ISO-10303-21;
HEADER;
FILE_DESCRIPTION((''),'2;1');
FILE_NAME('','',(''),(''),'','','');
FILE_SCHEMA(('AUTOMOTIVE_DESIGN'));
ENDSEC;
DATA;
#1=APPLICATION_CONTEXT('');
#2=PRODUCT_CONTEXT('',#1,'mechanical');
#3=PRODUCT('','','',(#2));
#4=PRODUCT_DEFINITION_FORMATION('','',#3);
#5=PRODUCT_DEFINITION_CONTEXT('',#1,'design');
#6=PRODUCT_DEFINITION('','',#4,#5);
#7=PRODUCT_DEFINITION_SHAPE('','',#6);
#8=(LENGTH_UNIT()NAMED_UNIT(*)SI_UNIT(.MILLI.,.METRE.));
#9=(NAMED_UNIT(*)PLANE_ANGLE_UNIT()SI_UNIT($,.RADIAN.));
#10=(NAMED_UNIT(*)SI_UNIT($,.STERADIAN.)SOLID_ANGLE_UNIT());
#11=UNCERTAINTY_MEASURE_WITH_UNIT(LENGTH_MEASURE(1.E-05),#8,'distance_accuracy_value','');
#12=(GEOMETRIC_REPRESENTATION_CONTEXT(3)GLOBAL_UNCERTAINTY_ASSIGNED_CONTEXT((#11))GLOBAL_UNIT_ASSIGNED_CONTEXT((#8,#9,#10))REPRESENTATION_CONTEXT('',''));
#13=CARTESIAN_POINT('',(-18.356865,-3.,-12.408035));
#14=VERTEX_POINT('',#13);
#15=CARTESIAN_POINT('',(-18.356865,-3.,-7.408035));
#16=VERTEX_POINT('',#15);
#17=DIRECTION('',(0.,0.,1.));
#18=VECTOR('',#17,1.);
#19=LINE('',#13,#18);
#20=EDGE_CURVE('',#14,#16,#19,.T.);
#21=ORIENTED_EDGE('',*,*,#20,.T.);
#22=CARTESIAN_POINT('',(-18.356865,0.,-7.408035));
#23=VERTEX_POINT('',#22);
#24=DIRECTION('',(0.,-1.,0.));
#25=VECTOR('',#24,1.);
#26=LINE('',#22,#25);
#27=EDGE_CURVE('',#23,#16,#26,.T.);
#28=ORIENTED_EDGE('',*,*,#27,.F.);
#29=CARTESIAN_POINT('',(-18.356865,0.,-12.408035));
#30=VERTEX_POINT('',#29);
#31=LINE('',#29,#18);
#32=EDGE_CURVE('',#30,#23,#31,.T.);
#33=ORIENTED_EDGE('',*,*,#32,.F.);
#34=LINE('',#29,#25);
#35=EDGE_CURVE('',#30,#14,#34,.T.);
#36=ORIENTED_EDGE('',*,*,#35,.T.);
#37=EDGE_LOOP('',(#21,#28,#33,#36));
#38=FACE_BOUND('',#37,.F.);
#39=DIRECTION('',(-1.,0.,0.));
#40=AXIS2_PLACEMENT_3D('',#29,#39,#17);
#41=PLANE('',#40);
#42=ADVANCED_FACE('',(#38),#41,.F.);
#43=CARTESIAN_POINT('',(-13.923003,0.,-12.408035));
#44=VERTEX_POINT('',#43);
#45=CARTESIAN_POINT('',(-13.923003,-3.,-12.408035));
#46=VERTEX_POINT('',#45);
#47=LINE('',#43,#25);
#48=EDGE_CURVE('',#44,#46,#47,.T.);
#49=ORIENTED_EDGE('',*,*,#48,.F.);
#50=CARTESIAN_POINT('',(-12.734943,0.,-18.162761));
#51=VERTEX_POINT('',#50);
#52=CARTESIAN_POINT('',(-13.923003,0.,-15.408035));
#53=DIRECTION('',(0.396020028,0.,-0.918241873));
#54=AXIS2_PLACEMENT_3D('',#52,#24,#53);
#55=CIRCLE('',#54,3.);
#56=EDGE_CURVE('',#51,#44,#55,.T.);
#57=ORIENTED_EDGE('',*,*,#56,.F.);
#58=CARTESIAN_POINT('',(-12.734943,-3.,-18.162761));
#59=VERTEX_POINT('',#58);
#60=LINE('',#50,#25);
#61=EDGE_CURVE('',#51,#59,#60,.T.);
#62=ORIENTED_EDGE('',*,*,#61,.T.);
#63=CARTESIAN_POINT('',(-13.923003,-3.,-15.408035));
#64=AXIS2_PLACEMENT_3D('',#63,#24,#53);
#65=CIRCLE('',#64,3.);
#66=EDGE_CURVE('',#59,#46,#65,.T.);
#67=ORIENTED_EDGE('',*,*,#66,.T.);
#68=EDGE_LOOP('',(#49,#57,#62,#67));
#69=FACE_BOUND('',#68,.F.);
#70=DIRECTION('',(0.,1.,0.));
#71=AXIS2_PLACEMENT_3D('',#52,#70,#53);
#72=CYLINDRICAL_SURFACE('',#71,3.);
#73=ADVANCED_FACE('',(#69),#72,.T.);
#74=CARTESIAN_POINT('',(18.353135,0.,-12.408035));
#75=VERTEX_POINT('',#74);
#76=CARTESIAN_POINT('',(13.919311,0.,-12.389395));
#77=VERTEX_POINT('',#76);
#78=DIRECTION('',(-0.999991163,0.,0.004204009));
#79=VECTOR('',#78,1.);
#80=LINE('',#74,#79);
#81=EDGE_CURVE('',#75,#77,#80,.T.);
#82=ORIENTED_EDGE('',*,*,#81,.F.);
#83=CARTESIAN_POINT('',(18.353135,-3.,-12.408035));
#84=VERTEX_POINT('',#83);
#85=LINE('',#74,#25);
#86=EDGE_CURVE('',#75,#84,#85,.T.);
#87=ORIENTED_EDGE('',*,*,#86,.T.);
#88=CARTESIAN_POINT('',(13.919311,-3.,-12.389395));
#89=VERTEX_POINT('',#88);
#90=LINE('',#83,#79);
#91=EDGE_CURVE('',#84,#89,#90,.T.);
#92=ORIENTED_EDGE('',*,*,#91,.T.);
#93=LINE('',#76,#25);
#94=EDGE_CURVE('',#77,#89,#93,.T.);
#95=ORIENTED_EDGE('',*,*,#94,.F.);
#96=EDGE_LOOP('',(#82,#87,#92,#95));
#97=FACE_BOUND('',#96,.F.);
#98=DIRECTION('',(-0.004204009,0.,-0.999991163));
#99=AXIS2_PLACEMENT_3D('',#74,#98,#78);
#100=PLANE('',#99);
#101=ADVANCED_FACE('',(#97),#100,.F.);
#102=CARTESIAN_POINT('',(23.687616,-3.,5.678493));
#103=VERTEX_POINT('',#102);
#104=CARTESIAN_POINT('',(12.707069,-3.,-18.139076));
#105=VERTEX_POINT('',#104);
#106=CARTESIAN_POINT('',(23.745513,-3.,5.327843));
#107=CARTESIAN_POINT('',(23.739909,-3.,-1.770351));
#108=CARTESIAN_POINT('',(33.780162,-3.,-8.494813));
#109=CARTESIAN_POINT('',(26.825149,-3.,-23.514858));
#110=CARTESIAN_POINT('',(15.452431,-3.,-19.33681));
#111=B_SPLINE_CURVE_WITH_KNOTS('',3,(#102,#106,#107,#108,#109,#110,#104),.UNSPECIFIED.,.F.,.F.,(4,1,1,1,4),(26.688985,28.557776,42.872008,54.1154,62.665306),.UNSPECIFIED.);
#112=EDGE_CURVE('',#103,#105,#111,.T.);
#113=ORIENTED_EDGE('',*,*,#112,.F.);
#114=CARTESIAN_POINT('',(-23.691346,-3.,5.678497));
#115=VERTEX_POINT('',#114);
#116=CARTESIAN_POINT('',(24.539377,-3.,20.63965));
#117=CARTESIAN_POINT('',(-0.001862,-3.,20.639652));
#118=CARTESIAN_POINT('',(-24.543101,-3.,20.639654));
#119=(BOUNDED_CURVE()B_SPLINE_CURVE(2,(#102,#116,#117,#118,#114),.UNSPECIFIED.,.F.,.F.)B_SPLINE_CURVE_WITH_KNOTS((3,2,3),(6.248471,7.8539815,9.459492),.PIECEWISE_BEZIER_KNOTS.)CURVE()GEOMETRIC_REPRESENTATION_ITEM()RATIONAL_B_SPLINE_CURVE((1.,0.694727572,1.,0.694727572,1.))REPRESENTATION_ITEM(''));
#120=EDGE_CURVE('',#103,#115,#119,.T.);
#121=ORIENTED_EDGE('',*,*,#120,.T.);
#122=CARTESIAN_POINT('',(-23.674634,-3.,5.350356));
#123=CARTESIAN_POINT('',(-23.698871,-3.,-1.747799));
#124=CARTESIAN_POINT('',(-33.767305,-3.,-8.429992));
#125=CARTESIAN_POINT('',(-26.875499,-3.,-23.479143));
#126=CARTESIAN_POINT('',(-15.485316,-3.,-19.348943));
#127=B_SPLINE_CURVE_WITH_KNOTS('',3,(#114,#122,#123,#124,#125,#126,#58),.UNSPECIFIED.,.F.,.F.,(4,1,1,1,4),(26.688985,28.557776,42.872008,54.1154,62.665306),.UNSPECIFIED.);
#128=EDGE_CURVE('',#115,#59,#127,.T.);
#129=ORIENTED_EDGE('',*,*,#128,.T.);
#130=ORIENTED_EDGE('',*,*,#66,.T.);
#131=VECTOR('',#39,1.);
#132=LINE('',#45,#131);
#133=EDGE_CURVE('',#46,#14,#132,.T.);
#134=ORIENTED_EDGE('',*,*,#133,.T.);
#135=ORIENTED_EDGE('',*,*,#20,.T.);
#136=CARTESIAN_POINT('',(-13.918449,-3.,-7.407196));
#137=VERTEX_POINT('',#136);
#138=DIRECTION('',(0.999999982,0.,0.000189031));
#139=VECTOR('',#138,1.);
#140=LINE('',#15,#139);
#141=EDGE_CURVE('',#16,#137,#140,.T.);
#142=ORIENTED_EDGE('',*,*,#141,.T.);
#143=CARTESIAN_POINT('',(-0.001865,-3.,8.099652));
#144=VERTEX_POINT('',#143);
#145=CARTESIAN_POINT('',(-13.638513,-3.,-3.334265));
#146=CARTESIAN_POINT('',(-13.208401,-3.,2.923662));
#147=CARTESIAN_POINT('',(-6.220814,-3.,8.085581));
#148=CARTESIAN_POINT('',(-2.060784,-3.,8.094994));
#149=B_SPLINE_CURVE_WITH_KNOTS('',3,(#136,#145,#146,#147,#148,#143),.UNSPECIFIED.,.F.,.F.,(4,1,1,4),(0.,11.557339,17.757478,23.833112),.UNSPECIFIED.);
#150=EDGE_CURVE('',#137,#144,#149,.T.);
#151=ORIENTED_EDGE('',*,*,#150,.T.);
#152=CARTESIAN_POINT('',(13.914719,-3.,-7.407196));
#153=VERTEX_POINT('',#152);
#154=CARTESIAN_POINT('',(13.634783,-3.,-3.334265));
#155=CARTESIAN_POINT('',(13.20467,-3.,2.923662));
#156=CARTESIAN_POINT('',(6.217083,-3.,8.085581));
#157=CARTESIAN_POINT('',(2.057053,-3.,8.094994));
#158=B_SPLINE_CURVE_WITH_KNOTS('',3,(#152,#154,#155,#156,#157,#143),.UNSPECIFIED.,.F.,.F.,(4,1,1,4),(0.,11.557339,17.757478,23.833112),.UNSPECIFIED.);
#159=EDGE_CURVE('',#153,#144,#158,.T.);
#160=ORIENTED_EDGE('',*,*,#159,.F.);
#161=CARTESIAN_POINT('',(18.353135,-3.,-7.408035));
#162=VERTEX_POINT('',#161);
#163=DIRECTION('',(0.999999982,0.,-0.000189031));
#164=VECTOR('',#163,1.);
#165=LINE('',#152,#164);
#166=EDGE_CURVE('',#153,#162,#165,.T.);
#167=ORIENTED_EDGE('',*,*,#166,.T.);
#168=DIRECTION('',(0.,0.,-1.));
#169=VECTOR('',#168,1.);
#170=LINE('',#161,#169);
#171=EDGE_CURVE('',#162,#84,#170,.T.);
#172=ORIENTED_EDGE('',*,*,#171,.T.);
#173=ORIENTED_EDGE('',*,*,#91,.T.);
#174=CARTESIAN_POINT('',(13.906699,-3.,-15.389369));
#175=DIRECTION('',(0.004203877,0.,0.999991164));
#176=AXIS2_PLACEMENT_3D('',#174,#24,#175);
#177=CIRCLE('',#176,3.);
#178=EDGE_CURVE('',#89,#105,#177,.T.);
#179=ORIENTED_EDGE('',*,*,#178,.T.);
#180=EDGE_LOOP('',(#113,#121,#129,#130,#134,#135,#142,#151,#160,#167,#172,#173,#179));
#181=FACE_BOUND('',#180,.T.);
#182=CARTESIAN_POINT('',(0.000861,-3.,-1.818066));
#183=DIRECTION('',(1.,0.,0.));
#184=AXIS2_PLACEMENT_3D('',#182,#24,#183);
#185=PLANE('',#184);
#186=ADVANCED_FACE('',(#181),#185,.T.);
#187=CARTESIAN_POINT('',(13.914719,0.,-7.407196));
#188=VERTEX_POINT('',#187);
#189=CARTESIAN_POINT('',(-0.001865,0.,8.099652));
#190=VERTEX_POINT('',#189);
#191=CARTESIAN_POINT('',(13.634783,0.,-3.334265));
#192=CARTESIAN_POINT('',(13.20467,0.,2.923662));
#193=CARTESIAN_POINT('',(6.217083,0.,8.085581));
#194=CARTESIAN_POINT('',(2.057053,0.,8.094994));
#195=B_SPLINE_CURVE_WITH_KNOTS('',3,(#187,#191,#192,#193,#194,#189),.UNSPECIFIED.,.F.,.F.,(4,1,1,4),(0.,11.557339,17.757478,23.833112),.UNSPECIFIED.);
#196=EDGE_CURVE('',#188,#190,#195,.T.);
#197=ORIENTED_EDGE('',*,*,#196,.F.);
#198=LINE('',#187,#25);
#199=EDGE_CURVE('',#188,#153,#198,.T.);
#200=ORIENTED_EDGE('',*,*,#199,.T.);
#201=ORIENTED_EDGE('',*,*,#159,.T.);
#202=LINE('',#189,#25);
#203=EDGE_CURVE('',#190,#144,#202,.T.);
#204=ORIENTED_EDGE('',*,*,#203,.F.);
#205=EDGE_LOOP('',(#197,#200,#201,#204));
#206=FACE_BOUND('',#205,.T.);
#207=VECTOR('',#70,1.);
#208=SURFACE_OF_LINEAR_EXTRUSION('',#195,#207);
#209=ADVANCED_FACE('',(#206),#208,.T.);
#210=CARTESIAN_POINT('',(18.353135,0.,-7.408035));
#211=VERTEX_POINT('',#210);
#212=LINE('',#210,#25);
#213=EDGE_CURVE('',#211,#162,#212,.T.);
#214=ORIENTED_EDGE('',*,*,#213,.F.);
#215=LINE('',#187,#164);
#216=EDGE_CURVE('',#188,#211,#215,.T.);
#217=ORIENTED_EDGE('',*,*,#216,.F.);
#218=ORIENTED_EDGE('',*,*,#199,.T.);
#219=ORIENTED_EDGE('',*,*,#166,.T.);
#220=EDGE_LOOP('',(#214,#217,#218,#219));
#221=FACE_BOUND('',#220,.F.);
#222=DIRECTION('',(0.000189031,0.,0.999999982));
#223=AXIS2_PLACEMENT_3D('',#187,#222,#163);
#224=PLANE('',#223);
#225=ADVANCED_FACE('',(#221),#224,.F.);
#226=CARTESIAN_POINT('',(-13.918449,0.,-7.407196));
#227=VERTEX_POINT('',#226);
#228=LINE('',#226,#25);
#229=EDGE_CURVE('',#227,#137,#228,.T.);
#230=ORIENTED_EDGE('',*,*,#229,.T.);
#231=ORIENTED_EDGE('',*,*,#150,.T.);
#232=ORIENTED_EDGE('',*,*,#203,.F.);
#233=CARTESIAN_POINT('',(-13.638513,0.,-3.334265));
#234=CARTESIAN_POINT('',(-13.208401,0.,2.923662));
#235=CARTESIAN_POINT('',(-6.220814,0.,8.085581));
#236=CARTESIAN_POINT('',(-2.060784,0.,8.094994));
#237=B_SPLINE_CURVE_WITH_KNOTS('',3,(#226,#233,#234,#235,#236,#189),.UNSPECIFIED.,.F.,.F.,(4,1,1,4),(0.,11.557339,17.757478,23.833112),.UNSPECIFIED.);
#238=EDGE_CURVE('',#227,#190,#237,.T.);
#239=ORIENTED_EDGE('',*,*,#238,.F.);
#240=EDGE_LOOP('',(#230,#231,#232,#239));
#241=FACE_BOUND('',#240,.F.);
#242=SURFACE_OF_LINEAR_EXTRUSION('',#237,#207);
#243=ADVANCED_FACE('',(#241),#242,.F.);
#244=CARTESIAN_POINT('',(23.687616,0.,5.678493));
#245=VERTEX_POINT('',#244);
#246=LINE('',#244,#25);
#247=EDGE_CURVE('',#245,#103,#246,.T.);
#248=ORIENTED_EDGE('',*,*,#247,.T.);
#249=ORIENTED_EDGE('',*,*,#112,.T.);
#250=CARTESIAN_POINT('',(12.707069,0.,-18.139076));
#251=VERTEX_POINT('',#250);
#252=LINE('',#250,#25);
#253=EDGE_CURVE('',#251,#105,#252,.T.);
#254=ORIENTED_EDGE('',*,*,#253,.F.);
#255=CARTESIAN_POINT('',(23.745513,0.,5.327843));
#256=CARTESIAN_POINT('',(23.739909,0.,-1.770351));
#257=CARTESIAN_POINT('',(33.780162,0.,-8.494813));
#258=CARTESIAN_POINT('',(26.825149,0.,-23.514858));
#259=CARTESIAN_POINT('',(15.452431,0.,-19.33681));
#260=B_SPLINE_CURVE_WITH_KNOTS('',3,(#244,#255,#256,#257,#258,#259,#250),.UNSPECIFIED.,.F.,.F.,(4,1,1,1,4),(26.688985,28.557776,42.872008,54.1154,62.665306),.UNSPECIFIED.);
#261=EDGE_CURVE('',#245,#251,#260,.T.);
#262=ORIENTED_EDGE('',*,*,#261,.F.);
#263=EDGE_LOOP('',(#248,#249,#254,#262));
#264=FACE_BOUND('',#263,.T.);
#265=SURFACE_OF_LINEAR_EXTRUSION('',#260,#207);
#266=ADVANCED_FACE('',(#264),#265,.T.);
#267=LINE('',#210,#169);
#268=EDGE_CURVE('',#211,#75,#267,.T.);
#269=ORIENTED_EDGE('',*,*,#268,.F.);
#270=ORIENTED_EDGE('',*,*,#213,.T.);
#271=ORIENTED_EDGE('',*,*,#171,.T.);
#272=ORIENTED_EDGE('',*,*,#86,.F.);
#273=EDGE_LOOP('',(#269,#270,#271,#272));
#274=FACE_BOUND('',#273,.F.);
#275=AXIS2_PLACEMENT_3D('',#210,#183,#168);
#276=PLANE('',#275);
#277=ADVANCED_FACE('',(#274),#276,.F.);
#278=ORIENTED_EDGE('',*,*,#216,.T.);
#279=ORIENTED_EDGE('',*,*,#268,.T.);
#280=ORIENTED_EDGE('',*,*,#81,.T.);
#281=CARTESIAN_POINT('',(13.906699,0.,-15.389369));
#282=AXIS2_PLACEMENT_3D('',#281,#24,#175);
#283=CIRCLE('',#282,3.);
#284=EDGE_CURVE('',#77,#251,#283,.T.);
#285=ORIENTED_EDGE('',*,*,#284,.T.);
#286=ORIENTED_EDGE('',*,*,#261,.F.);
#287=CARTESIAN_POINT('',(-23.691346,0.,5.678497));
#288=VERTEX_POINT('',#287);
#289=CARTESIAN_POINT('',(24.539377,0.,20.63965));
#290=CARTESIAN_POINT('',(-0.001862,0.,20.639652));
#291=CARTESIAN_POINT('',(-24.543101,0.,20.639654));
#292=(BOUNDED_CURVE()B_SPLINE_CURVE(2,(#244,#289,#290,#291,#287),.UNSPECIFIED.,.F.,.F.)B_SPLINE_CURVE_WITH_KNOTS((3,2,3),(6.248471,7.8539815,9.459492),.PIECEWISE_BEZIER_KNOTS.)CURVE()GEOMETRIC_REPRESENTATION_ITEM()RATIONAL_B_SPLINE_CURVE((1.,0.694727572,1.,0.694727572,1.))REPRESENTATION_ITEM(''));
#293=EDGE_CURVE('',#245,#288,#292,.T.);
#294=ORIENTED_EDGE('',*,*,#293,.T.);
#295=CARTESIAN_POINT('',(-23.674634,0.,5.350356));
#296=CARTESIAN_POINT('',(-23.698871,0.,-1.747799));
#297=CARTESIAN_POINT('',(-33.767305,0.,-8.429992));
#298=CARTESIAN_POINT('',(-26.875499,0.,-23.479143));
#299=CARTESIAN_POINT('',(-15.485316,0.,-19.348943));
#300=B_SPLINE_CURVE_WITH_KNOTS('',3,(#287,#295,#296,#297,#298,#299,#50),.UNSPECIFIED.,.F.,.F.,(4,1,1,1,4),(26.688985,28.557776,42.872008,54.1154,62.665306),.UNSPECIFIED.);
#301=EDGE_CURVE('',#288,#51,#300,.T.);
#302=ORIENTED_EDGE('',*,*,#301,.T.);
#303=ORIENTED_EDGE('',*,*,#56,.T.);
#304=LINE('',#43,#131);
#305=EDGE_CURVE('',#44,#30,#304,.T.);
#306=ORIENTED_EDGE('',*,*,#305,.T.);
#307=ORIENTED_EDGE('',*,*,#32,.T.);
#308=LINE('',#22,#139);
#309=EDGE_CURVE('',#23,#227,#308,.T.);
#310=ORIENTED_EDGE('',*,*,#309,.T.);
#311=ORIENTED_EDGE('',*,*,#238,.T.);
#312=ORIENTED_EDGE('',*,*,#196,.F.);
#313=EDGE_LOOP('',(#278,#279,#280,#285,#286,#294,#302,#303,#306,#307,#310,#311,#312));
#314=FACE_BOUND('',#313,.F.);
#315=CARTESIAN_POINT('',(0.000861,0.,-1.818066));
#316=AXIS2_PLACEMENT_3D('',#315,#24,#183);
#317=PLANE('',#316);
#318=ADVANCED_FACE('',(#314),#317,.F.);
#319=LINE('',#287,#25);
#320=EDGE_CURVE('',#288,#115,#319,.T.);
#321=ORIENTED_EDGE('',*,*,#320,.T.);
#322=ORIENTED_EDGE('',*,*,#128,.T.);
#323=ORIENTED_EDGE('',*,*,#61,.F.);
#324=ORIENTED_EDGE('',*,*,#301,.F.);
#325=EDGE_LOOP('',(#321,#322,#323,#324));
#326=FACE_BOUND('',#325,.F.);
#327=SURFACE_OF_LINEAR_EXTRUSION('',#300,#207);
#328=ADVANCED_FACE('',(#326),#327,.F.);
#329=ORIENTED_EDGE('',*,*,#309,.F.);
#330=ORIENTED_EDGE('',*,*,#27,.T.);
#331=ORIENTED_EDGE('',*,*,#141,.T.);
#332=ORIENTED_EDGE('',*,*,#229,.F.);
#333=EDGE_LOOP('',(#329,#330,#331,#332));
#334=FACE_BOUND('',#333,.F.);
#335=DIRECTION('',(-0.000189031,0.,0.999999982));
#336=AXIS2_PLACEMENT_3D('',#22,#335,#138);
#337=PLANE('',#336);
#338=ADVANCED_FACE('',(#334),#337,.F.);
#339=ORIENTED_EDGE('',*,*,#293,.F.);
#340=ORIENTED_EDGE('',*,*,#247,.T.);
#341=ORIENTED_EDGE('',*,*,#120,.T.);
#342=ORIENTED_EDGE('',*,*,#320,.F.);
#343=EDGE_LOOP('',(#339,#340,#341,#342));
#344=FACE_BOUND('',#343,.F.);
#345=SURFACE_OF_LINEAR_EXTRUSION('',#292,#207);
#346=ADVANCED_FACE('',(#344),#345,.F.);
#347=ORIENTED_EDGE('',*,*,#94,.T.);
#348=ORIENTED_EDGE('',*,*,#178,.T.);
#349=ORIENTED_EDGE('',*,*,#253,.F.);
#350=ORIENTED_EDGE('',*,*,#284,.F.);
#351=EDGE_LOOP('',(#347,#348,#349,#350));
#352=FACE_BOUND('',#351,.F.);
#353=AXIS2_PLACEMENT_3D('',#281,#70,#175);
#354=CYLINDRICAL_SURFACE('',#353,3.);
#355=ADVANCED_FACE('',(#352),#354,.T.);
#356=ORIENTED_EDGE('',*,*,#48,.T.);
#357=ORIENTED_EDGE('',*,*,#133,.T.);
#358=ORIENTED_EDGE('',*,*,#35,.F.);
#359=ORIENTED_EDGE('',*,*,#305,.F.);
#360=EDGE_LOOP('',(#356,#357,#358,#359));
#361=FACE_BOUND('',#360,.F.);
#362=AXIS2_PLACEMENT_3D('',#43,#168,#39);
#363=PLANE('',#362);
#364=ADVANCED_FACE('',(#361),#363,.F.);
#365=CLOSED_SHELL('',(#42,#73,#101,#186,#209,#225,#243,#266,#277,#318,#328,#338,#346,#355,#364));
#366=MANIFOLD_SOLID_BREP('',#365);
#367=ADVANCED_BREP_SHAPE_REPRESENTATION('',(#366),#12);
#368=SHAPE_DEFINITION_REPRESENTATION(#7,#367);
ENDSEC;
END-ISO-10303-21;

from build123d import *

# Parameters (mm, degrees)
F1_DEPTH = 3


# Not quite as in the source:
# - ends of sketch curves that miss each other by under 0.0002 mm in the source are joined
# - the dataset's text gives a spline's control points without its knots; the knots are read off the source's solid


with BuildPart() as f1:
    # F0 (on Front) → F1 (new body)
    with BuildSketch(Plane.XZ):
        with BuildLine():
            Line((-13.923003, -12.408035), (-18.356865, -12.408035))
            Line((-18.356865, -12.408035), (-18.356865, -7.408035))
            Line((-18.356865, -7.408035), (-13.918449, -7.407196))
            add(Edge.make_bspline(
                [(-13.918449, -7.407196), (-13.638513, -3.334265), (-13.208401, 2.923662), (-6.220814, 8.085581), (-2.060784, 8.094994), (-0.001865, 8.099652)],
                knots=[0, 0, 0, 0, 11.557339, 17.757478, 23.833112, 23.833112, 23.833112, 23.833112], degree=3))
            add(Edge.make_bspline(
                [(13.914719, -7.407196), (13.634783, -3.334265), (13.20467, 2.923662), (6.217083, 8.085581), (2.057053, 8.094994), (-0.001865, 8.099652)],
                knots=[0, 0, 0, 0, 11.557339, 17.757478, 23.833112, 23.833112, 23.833112, 23.833112], degree=3))
            Line((13.914719, -7.407196), (18.353135, -7.408035))
            Line((18.353135, -7.408035), (18.353135, -12.408035))
            Line((18.353135, -12.408035), (13.919311, -12.389395))
            ThreePointArc((13.919311, -12.389395), (10.9712332753, -14.7704659552), (12.7070690482, -18.1390758896))
            add(Edge.make_bspline(
                [(23.687616, 5.678493), (23.745513, 5.327843), (23.739909, -1.770351), (33.780162, -8.494813), (26.825149, -23.514858), (15.452431, -19.33681), (12.7070690482, -18.1390758896)],
                knots=[26.688985, 26.688985, 26.688985, 26.688985, 28.557776, 42.872008, 54.1154, 62.665306, 62.665306, 62.665306, 62.665306], degree=3))
            add(Edge.make_bspline(
                [(23.687616, 5.678493), (24.5393769355, 20.6396499944), (-0.0018618243, 20.639652), (-24.5431005841, 20.6396540056), (-23.6913461529, 5.6784965777)],
                knots=[6.248471, 6.248471, 6.248471, 7.8539815, 7.8539815, 9.459492, 9.459492, 9.459492], degree=2, weights=[1, 0.694727572, 1, 0.694727572, 1]))
            add(Edge.make_bspline(
                [(-23.6913461529, 5.6784965777), (-23.674634, 5.350356), (-23.698871, -1.747799), (-33.767305, -8.429992), (-26.875499, -23.479143), (-15.485316, -19.348943), (-12.734943, -18.162761)],
                knots=[26.688985, 26.688985, 26.688985, 26.688985, 28.557776, 42.872008, 54.1154, 62.665306, 62.665306, 62.665306, 62.665306], degree=3))
            ThreePointArc((-12.734943, -18.162761), (-10.9849613794, -14.8014779657), (-13.923003, -12.408035))
        make_face()
    extrude(amount=F1_DEPTH)


solid = f1.part
